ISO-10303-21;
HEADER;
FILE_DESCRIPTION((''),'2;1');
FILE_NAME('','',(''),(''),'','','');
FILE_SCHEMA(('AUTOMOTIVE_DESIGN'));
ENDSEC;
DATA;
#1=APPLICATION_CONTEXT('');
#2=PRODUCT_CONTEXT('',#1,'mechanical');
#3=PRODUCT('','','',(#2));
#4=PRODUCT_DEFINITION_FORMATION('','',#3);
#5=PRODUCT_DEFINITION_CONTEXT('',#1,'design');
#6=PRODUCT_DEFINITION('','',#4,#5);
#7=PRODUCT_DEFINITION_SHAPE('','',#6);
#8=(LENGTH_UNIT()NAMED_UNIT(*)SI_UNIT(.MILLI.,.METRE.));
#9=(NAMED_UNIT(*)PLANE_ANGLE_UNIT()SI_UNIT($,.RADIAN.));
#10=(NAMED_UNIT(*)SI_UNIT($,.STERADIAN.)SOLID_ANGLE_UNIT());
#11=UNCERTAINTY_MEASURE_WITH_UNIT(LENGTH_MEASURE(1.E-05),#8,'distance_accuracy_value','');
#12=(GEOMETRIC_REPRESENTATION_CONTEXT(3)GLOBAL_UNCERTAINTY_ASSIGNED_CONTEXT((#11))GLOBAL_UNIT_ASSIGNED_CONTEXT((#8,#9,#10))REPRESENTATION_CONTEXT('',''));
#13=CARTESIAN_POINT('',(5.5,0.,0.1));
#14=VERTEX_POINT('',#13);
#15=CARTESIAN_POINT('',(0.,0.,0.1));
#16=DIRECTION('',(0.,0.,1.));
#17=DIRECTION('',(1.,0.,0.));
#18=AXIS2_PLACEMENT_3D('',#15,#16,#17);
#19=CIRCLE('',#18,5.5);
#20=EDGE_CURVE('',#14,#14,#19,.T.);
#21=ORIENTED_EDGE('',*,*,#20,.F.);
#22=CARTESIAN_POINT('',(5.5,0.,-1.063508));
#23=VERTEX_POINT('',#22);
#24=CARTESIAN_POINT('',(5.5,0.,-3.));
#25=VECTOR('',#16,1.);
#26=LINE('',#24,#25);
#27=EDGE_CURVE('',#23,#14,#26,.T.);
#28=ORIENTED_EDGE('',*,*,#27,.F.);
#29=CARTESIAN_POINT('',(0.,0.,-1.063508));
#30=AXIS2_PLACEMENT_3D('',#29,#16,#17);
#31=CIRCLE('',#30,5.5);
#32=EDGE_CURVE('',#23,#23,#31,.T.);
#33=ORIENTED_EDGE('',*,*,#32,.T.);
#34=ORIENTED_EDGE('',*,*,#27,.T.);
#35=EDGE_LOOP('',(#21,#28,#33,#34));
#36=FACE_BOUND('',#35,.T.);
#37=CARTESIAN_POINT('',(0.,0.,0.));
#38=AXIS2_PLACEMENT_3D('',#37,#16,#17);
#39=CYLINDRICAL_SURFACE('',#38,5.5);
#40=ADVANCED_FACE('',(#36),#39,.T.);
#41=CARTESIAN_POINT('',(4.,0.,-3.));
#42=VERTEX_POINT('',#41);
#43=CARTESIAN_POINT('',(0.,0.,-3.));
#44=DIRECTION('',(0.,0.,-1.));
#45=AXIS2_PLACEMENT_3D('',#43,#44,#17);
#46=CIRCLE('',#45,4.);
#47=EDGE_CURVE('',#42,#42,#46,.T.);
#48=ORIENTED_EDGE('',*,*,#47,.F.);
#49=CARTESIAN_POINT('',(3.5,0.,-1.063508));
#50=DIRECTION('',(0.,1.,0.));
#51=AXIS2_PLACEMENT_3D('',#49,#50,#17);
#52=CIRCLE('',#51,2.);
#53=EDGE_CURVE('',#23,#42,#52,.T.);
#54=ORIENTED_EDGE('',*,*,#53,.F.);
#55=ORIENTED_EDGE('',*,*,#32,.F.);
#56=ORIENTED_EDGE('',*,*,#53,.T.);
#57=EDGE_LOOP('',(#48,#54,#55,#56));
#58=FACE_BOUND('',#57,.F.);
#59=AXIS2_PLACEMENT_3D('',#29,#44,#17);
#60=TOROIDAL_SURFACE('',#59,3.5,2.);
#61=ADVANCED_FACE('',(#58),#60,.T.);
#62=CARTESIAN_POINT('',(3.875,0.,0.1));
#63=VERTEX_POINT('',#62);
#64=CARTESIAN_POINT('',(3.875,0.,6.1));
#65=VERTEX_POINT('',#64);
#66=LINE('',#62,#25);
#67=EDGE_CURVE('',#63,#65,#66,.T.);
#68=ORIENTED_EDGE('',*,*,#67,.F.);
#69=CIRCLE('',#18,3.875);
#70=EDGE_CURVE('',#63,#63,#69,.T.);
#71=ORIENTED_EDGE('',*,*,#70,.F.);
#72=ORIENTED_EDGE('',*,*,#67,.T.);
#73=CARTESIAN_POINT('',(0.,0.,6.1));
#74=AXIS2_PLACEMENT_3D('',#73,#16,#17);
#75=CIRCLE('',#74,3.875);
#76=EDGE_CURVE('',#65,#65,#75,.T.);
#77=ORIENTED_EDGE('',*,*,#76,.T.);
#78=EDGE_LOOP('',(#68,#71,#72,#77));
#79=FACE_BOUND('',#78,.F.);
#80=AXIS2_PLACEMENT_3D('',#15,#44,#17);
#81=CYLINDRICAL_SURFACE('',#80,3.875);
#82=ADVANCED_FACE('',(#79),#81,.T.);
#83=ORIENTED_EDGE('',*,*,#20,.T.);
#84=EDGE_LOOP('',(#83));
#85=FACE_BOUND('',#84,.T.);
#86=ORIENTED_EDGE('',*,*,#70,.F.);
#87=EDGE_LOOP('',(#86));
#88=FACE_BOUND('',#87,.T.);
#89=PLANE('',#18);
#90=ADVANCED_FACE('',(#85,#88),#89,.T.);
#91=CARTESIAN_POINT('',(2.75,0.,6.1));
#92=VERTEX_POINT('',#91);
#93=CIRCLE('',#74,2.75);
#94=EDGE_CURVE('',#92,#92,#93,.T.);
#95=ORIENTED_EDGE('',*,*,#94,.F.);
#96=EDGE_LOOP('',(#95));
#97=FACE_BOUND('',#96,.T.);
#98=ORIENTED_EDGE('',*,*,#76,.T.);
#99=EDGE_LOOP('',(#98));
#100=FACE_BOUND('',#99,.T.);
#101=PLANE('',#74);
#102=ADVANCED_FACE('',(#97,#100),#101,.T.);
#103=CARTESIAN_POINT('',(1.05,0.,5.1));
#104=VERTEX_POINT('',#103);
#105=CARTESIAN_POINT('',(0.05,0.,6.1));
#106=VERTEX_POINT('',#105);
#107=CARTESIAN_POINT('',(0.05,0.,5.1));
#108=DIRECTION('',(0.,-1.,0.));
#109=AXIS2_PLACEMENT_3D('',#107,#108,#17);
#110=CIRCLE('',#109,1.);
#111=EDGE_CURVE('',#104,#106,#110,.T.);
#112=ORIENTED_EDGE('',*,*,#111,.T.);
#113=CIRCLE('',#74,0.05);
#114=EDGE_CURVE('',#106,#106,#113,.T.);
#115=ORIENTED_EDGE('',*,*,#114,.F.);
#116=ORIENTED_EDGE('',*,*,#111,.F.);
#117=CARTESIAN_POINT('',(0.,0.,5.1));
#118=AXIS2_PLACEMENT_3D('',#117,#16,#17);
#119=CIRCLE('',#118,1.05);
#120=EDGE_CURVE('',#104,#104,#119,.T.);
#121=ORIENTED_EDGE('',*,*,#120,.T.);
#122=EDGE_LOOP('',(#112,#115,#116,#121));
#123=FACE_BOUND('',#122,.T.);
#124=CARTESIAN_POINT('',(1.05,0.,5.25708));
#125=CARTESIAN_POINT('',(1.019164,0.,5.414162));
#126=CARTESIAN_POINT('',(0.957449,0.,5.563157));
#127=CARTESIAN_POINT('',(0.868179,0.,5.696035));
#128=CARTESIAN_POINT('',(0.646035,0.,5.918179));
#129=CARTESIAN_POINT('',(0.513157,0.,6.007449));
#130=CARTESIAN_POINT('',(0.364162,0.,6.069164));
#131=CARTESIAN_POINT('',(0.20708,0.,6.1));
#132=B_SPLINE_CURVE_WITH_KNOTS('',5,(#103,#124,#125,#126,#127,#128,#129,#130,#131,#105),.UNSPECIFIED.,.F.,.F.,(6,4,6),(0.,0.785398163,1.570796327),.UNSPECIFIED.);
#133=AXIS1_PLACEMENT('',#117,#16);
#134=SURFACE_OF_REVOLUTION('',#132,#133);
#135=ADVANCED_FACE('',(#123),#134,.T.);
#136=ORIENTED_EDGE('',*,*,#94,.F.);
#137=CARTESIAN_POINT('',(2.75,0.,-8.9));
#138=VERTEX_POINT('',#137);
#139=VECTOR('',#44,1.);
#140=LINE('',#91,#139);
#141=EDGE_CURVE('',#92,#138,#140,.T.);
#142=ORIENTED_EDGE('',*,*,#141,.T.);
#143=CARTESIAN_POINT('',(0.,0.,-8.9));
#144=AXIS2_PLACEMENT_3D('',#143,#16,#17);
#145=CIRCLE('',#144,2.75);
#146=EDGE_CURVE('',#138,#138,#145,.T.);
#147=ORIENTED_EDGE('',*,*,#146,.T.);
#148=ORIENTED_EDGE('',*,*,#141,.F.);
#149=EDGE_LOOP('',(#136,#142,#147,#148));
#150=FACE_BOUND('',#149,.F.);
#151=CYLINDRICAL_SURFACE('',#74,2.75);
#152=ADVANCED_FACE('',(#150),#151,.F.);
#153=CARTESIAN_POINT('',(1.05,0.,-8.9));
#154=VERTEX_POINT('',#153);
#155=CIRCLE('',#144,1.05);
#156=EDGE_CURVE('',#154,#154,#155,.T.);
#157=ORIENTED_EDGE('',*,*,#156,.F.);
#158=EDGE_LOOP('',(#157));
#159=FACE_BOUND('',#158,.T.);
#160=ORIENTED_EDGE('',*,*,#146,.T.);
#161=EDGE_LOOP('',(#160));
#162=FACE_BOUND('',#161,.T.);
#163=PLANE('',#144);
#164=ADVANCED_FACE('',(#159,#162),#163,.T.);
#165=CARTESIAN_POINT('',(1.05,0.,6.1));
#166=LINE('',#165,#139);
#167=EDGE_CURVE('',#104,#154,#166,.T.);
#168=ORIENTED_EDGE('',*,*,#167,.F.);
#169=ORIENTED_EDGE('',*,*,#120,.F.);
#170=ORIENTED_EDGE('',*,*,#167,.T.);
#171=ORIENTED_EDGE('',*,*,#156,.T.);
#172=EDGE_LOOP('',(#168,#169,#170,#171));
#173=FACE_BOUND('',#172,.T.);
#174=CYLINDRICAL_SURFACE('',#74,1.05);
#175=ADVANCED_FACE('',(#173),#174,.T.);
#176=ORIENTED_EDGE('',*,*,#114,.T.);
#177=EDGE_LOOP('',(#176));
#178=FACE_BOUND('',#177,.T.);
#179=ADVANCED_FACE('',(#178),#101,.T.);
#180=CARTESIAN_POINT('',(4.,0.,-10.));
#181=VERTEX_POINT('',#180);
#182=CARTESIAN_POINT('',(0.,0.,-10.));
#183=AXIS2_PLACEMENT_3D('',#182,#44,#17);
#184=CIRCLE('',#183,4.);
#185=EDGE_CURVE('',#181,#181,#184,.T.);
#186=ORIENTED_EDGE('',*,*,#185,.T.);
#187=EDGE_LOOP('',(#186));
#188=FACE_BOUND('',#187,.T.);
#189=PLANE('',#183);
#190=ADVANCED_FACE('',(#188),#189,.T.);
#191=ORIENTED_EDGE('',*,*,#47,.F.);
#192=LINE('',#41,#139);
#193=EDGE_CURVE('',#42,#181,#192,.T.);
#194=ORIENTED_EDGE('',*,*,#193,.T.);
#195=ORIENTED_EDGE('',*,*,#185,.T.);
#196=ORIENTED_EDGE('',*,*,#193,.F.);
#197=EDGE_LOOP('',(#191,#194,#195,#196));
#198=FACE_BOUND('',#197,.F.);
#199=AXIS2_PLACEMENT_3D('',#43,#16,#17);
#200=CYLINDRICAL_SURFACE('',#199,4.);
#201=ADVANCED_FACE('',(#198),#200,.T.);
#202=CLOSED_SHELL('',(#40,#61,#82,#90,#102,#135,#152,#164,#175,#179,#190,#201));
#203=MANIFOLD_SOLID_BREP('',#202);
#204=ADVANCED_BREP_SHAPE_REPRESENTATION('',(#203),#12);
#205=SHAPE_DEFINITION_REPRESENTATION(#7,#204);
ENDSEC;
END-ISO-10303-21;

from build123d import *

# Parameters (mm, degrees)
F0_R     = 5.5
F1_DEPTH = 0.1
F2_R     = 3.875
F3_DEPTH = 6
F4_DEPTH = 3
F5_R     = 4
F6_DEPTH = 7
F7_R     = 2.75
F7_R_2   = 1.05
F8_DEPTH = 15
F9_R     = 1


# Not quite as in the source:
# - a fillet or chamfer that OpenCascade refuses, or shapes differently, is made with other operations: its cross-section is extruded or revolved along the edge and cut away or added


with BuildPart() as f1:
    # F0 (on Top) → F1 (new body)
    with BuildSketch(Plane.XY):
        Circle(F0_R)
    extrude(amount=F1_DEPTH)

    # F2 (on face) → F3 (join)
    with BuildSketch(Plane.XY.offset(0.1)):
        Circle(F2_R)
    extrude(amount=F3_DEPTH)

    # F0 (on Top) → F4 (join)
    with BuildSketch(Plane.XY):
        Circle(F0_R)
    extrude(amount=-F4_DEPTH)

    # F5 (on face) → F6 (join)
    with BuildSketch(Plane(origin=(0, 0, -3), x_dir=(1, 0, 0), z_dir=(0, 0, -1))):
        Circle(F5_R)
    extrude(amount=F6_DEPTH)

    # F7 (on face) → F8 (cut)
    with BuildSketch(Plane.XY.offset(6.1)):
        Circle(F7_R)
        Circle(F7_R_2, mode=Mode.SUBTRACT)
    extrude(amount=-F8_DEPTH, mode=Mode.SUBTRACT)

    # F9
    f9_edges = [f1.edges().sort_by_distance(p)[0] for p in [
        (-1.05, 0, 6.1),
    ]]
    fillet(f9_edges, radius=F9_R)

    # F10: fillet of radius 2 on 1 edges, made by hand

    # F10_s1 → F10_t2 (revolve, cut)
    with BuildSketch(Plane.XZ):
        with BuildLine():
            ThreePointArc((5.5, -1.0635083269), (5.0811388301, -2.2882531983), (4, -3))
            Line((4, -3), (5.5, -3))
            Line((5.5, -3), (5.5, -1.0635083269))
        make_face()
    revolve(axis=Axis((0, 0, -3), (0, 0, 1)), mode=Mode.SUBTRACT)


solid = f1.part
